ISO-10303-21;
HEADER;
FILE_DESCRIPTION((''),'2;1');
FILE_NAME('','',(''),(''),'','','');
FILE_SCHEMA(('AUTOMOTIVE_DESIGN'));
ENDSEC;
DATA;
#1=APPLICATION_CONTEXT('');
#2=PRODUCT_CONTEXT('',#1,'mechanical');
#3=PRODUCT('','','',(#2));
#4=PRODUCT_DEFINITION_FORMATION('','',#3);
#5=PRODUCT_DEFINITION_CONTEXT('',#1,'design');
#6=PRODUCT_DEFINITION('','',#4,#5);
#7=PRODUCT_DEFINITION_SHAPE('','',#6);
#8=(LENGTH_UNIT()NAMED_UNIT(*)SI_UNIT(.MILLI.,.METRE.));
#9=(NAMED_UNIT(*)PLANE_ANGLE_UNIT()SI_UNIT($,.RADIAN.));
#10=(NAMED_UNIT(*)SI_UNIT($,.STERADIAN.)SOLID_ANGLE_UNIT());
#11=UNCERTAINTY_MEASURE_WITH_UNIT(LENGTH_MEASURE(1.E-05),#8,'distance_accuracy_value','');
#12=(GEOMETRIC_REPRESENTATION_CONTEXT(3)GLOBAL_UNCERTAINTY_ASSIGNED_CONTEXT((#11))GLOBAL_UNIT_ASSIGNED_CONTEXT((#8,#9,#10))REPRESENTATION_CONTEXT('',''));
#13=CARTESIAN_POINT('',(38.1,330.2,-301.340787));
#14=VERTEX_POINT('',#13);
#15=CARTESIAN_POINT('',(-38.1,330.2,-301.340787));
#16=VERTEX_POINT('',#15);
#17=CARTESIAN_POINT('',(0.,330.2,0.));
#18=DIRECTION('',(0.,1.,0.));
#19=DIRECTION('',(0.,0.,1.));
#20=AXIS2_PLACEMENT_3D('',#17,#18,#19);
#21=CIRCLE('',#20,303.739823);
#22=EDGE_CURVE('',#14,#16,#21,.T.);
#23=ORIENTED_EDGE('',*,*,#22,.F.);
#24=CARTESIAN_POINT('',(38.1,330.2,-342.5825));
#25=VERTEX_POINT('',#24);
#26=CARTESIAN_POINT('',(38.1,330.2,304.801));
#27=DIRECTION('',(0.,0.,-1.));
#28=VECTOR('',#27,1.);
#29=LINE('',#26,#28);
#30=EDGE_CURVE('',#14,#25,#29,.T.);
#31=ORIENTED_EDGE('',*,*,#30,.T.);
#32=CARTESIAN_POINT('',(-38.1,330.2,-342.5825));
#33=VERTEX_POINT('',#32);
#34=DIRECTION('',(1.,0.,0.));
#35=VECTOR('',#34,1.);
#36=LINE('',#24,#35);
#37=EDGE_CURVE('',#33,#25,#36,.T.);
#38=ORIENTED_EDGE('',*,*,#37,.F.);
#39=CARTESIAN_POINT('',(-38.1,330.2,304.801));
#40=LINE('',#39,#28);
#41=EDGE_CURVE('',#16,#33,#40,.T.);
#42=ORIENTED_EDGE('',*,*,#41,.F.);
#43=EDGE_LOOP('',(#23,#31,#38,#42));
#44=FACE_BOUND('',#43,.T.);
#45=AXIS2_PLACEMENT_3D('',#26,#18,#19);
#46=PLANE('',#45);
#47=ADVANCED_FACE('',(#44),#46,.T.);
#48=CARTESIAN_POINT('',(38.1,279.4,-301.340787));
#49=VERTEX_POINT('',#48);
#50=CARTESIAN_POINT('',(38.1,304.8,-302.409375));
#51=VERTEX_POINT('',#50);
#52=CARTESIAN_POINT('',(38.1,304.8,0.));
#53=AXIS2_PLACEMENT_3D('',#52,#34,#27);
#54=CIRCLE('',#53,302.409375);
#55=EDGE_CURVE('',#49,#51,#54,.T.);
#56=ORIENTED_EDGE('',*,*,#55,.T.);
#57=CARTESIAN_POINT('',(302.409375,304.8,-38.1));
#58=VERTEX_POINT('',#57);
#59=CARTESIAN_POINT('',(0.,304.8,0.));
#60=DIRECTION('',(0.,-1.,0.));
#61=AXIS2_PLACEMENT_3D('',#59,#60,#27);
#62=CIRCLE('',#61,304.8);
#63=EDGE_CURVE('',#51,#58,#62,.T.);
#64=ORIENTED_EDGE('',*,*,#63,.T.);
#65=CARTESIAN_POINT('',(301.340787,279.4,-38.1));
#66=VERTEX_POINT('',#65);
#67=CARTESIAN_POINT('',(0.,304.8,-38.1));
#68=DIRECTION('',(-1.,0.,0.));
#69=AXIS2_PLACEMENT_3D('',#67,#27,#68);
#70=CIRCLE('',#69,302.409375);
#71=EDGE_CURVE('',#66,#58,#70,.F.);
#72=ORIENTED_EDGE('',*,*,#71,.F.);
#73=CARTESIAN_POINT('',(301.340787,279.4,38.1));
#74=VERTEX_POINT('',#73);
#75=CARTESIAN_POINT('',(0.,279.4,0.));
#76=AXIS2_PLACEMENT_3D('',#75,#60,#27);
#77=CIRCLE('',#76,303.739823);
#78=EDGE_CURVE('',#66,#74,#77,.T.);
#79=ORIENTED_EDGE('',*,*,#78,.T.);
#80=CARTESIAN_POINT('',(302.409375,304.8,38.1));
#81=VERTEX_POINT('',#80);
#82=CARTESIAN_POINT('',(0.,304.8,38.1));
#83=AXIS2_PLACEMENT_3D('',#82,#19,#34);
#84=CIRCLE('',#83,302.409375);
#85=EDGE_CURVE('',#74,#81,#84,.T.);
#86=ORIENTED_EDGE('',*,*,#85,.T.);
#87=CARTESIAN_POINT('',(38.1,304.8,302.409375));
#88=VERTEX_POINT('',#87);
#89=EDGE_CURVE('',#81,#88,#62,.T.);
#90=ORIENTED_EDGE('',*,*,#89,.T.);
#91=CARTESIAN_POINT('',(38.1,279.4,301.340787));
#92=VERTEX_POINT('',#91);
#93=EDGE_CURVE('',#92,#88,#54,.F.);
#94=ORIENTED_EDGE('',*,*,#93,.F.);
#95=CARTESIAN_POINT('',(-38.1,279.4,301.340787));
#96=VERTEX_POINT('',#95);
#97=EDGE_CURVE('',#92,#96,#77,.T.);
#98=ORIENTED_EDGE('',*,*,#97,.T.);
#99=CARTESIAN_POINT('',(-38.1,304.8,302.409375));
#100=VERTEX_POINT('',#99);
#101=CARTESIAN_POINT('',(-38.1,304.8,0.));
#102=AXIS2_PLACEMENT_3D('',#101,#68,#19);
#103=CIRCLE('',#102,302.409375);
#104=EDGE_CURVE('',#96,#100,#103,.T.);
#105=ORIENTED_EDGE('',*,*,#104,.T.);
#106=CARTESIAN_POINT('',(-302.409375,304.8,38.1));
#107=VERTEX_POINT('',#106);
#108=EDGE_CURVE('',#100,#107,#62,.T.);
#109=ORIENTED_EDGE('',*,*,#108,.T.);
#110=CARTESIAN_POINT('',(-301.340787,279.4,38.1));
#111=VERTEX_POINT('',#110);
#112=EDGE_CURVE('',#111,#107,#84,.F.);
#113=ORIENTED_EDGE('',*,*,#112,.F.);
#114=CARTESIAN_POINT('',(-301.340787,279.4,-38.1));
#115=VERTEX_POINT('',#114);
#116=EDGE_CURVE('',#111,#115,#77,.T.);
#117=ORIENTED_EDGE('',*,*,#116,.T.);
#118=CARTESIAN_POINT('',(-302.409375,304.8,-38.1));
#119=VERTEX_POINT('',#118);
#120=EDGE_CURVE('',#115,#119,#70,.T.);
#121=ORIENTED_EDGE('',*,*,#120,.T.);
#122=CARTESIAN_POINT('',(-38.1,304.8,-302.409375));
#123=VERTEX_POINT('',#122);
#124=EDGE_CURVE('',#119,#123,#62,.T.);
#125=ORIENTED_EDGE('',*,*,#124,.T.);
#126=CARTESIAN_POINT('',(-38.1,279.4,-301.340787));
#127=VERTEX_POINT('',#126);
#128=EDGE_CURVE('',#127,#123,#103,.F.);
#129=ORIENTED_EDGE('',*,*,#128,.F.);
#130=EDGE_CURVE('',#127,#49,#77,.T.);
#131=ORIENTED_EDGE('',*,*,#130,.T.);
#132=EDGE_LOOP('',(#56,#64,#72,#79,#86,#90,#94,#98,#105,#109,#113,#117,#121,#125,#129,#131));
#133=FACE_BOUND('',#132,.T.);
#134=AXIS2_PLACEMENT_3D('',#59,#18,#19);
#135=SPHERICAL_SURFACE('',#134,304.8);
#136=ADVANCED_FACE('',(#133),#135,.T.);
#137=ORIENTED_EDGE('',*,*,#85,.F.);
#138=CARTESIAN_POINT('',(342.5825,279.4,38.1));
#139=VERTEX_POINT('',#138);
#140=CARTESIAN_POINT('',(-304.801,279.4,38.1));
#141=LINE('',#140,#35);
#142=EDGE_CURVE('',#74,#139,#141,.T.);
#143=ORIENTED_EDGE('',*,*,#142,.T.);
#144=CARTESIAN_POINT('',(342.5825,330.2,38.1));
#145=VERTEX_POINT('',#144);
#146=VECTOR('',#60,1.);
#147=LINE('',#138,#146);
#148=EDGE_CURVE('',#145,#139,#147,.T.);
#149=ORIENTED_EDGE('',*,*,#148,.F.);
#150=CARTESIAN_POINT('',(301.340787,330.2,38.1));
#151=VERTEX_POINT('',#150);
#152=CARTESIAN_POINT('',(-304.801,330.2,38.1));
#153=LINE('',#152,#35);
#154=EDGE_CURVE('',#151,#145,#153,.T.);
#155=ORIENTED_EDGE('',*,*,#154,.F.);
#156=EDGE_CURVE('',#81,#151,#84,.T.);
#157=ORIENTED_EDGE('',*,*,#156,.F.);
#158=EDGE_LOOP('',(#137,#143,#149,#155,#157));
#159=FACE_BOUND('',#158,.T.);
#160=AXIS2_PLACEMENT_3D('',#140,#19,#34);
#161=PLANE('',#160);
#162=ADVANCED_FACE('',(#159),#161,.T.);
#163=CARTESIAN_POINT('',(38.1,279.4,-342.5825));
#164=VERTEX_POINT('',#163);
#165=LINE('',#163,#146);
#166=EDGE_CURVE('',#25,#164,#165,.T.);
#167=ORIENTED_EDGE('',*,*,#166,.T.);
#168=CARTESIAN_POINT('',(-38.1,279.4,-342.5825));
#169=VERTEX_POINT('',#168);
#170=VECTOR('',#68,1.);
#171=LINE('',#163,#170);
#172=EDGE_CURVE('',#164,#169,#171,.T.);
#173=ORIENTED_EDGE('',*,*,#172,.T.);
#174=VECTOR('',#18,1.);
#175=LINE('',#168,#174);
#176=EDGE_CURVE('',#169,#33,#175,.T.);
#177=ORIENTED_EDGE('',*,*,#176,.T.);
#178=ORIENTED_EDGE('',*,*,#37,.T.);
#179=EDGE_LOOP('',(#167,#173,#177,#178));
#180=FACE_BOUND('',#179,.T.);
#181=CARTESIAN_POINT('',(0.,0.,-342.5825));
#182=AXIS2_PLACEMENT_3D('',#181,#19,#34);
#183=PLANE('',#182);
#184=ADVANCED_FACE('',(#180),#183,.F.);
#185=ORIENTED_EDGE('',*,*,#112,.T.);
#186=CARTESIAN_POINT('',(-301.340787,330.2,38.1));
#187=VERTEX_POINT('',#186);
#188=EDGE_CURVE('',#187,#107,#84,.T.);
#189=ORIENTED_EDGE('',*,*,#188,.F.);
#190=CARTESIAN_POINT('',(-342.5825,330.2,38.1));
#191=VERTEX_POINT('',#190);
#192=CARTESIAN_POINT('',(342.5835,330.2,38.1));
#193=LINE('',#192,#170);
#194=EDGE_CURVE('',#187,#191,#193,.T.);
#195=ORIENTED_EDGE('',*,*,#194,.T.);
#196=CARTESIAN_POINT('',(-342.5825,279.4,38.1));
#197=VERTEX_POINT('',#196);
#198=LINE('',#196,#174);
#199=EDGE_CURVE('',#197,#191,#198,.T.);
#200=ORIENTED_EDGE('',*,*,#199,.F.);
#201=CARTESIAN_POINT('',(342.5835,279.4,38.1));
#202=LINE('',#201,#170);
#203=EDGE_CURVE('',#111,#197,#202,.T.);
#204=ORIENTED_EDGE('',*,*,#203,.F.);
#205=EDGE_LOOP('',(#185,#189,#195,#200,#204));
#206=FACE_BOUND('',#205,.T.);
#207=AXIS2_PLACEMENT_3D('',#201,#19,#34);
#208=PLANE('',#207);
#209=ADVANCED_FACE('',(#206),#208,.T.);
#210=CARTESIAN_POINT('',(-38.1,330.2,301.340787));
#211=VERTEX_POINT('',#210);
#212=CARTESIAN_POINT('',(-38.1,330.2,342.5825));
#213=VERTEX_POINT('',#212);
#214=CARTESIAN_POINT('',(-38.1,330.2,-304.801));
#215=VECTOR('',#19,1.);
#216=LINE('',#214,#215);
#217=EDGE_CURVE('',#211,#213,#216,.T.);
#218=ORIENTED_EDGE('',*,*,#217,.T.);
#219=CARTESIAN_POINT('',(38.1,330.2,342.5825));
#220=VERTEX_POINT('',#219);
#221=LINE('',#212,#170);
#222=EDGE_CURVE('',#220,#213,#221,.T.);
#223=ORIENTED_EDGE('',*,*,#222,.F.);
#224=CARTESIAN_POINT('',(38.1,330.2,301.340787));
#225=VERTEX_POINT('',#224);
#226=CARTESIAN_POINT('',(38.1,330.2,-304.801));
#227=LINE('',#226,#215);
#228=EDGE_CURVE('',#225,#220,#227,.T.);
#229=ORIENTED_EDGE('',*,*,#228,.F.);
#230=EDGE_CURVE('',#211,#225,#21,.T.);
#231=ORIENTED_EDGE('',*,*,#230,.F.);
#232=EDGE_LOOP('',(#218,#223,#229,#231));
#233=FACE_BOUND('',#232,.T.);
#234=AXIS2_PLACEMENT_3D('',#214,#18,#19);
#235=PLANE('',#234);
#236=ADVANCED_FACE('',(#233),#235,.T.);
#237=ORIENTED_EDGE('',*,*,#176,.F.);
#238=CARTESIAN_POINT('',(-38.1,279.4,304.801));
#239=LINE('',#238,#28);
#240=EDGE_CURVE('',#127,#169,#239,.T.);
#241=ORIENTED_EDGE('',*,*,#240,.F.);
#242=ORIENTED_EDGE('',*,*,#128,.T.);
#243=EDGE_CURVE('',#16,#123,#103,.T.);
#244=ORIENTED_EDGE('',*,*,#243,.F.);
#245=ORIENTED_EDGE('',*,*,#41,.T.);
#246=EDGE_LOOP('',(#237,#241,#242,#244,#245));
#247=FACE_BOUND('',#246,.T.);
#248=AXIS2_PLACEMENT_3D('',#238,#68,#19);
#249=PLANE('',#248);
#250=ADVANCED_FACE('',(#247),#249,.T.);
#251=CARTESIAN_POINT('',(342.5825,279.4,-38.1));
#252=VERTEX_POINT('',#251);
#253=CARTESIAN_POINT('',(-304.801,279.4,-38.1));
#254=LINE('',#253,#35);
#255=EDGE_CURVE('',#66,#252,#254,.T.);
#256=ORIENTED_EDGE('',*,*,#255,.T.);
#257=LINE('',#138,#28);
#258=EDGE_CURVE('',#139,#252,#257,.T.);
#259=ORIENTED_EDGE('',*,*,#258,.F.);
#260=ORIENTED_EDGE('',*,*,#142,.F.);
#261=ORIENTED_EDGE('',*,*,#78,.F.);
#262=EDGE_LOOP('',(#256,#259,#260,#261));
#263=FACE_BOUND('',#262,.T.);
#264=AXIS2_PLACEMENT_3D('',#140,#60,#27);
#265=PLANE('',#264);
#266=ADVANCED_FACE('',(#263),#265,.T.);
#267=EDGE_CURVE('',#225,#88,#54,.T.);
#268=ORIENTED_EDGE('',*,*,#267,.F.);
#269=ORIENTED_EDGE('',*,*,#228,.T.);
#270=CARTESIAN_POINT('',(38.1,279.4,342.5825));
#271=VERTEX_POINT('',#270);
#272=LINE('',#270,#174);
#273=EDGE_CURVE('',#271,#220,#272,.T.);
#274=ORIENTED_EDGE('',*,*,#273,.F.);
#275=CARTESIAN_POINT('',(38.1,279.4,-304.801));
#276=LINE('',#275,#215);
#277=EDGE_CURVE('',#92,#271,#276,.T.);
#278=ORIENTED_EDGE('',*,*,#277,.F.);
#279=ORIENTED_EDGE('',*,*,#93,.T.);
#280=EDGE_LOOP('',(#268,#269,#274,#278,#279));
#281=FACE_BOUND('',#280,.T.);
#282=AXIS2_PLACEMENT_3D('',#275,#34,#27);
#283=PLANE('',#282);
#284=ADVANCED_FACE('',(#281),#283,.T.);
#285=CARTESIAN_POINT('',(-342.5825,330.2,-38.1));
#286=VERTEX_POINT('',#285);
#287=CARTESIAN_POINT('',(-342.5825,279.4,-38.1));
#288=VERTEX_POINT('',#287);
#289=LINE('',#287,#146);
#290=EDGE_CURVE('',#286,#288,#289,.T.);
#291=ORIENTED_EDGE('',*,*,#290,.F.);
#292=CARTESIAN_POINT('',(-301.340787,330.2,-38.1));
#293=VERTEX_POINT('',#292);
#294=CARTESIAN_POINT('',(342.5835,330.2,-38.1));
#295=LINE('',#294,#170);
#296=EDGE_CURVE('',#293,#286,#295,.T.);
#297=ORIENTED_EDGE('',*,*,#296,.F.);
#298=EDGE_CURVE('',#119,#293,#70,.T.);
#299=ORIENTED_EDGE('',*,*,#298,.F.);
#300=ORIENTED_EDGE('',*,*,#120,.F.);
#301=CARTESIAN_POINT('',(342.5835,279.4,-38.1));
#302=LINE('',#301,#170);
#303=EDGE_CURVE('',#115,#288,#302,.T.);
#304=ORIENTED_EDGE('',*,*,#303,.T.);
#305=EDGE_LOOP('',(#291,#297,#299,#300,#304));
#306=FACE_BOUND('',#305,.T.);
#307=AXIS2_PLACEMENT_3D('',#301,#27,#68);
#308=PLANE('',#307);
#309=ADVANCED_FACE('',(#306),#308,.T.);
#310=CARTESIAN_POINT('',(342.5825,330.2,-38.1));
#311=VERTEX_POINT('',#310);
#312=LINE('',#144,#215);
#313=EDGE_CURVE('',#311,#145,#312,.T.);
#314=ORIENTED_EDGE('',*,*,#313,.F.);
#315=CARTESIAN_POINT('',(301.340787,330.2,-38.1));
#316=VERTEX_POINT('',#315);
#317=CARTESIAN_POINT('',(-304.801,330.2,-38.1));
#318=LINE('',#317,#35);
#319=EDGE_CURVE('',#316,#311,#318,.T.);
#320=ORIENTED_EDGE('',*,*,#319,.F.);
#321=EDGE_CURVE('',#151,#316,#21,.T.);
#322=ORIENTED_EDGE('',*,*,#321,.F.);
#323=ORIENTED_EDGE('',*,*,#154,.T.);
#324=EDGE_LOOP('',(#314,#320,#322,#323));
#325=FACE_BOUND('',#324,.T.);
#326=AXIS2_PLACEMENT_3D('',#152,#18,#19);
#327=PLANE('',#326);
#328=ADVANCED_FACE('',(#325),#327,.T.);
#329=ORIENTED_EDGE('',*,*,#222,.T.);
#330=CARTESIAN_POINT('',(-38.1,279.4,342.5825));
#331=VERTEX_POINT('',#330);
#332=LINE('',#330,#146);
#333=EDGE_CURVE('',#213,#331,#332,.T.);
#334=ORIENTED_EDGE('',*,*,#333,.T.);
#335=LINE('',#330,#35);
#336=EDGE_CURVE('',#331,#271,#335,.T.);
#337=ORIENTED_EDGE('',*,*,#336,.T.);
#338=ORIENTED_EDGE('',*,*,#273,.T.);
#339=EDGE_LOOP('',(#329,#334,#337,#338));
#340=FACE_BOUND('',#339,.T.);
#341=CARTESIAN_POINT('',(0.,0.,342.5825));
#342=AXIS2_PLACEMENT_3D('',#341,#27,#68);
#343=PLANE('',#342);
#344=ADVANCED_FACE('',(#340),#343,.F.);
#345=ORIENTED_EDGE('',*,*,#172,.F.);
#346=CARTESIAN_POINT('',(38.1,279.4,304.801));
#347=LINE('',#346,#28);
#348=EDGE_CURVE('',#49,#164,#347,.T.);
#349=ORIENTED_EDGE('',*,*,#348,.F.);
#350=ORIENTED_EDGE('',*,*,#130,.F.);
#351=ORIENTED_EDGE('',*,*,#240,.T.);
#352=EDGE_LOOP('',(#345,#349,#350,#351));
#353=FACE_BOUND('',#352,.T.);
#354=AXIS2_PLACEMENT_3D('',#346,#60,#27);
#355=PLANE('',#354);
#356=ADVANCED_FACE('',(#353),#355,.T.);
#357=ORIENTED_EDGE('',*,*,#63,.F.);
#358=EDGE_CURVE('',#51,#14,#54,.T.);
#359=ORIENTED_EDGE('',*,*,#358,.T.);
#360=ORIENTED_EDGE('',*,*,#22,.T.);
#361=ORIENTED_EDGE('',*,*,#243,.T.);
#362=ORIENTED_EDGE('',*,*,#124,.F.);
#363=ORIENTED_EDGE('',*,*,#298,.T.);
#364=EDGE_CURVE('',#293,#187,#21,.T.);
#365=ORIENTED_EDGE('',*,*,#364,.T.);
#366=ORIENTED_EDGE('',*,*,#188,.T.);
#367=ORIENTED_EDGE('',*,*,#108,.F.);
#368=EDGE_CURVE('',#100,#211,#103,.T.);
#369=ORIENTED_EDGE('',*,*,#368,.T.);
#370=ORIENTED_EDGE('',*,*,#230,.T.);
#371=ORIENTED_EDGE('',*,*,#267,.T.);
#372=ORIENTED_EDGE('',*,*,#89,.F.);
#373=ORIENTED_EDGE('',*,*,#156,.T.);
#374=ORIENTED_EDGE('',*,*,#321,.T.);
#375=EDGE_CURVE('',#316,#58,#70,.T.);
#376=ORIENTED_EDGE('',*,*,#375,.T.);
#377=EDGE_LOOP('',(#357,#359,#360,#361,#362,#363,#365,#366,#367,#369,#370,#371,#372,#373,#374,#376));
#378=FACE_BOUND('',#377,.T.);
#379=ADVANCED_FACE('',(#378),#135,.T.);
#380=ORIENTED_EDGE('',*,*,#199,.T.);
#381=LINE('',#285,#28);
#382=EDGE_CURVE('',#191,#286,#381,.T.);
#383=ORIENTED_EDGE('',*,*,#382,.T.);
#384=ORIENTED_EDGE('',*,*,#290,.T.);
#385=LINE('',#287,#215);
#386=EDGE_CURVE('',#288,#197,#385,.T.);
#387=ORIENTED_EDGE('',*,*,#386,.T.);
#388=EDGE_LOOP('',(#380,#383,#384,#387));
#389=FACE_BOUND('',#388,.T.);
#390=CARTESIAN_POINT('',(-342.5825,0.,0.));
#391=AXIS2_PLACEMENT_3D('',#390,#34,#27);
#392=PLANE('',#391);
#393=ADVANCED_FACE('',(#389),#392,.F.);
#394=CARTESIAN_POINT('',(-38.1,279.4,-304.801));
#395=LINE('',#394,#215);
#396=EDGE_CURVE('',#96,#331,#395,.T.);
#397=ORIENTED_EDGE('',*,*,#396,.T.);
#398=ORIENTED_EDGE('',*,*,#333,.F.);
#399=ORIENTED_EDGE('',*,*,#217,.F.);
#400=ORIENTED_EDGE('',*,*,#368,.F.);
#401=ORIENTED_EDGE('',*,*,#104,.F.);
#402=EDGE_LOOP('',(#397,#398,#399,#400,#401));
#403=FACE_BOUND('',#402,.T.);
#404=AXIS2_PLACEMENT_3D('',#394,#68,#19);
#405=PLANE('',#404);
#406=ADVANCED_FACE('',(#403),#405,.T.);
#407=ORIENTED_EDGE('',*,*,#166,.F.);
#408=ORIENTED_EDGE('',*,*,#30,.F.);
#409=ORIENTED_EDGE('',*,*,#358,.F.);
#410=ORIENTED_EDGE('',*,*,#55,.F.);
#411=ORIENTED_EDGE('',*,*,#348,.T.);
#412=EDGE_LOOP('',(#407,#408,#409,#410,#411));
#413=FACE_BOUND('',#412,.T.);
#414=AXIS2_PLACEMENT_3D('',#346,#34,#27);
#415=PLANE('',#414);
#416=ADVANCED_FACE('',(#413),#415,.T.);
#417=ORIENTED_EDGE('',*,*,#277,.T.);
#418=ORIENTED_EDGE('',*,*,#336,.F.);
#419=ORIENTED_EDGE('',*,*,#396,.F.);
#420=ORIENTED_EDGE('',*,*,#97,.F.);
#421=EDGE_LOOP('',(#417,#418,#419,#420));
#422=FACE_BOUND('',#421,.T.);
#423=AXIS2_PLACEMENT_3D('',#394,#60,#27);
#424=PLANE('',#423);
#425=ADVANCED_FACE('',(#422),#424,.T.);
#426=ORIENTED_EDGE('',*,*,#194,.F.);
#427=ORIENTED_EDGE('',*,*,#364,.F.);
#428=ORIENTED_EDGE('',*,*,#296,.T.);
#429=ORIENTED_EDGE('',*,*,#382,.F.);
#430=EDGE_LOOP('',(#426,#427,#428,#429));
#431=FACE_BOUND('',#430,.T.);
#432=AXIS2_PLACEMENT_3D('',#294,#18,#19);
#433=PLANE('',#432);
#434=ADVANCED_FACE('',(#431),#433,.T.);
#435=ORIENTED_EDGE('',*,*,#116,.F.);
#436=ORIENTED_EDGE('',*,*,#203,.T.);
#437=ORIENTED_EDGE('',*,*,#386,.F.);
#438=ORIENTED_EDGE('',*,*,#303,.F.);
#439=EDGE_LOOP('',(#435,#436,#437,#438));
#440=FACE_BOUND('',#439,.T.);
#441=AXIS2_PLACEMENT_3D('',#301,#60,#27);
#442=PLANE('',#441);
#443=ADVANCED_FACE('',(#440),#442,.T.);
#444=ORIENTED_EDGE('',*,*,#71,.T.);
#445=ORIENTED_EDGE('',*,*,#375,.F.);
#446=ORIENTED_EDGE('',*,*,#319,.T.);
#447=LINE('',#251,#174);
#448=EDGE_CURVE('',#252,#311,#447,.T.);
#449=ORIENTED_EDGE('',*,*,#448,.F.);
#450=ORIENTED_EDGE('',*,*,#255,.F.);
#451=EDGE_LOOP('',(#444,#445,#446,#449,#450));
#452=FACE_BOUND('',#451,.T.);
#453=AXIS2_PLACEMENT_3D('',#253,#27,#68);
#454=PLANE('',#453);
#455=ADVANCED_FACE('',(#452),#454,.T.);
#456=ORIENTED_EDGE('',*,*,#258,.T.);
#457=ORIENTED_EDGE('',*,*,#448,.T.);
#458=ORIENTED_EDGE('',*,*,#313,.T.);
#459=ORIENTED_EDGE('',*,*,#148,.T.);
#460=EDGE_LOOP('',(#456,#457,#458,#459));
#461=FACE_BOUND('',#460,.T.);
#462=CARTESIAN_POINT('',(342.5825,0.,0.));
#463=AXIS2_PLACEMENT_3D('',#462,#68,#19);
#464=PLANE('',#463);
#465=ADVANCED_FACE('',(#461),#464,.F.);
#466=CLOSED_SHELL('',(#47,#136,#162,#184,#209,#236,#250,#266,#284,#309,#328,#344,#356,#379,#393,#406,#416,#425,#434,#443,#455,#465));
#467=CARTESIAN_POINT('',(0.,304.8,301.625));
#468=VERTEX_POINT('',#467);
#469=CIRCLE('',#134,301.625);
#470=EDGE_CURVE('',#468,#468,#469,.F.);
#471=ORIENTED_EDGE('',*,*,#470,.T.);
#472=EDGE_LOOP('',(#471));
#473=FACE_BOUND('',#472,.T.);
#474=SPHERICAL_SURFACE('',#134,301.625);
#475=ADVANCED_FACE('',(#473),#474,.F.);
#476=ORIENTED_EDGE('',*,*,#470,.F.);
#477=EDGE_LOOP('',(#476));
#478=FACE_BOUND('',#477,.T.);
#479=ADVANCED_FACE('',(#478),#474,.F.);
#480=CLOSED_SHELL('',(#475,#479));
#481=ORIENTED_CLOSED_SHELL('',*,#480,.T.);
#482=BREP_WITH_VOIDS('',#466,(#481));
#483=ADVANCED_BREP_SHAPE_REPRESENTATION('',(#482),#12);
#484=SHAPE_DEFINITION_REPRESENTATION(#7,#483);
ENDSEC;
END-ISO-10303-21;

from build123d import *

# Parameters (mm, degrees)
SKETCH1_R                = 304.8
BOSS_EXTRUDE1_DEPTH      = 609.6
FILLET1_R                = 304.8
SHELL2_T                 = 3.175
BOSS_EXTRUDE2_REACH      = 942.01
BOSS_EXTRUDE2_END_RADIUS = 304.8
SKETCH3_W                = 76.2
SKETCH3_H                = 50.8
CIRPATTERN1_START        = 279.4
CIRPATTERN1_DEPTH        = 50.8


with BuildPart() as part:
    # Sketch1 → Boss-Extrude1 (new body)
    with BuildSketch(Plane(origin=(0, 0, 0), x_dir=(1, 0, 0), z_dir=(0, 1, 0))):
        with Locations(Location((0, 0, 0), (0, 0, 90))):
            Circle(SKETCH1_R)
    extrude(amount=BOSS_EXTRUDE1_DEPTH)

    # Fillet1
    fillet1_edges = [part.edges().sort_by_distance(p)[0] for p in [
        (0, 0, 304.8),
        (0, 609.6, 304.8),
    ]]
    fillet(fillet1_edges, radius=FILLET1_R - 0.0001)  # a hair under: the kernel refuses the full size

    # Shell2 (no face opened: a closed hollow body)
    add(offset(amount=-SHELL2_T, mode=Mode.PRIVATE), mode=Mode.SUBTRACT)

    # Boss-Extrude2: up to this sphere (the profile starts outside it)
    boss_extrude2_end = Location((0, 304.8, 0)) * Sphere(BOSS_EXTRUDE2_END_RADIUS, mode=Mode.PRIVATE)
    # Sketch3 → Boss-Extrude2 (add, up to the surface)
    with BuildSketch(Plane(origin=(342.5825, 0, 0), x_dir=(0, 0, -1), z_dir=(1, 0, 0)), mode=Mode.PRIVATE) as boss_extrude2_sk1:
        with Locations((0, 304.8)):
            Rectangle(SKETCH3_W, SKETCH3_H)
    boss_extrude2_tool1 = extrude(boss_extrude2_sk1.sketch, amount=-BOSS_EXTRUDE2_REACH, mode=Mode.PRIVATE) - boss_extrude2_end
    add(boss_extrude2_tool1.solids().sort_by_distance((342.5825, 304.8, 0))[0])

    # CirPattern1: read off the stored shape, not the designer's step
    # CirPattern1 outline → CirPattern1 (add)
    with BuildSketch(Plane(origin=(0, 0, 0), x_dir=(1, 0, 0), z_dir=(0, 1, 0)).offset(CIRPATTERN1_START)):
        with BuildLine():
            ThreePointArc((38.1, -301.34078715), (0, -303.739822875), (-38.1, -301.34078715))
            Line((-38.1, -301.34078715), (-38.1, -342.5825))
            Line((-38.1, -342.5825), (38.1, -342.5825))
            Line((38.1, -342.5825), (38.1, -301.34078715))
        make_face()
        with BuildLine():
            ThreePointArc((-301.34078715, -38.1), (-303.739822875, 0), (-301.34078715, 38.1))
            Line((-301.34078715, 38.1), (-342.5825, 38.1))
            Line((-342.5825, 38.1), (-342.5825, -38.1))
            Line((-342.5825, -38.1), (-301.34078715, -38.1))
        make_face()
        with BuildLine():
            ThreePointArc((-38.1, 301.34078715), (0, 303.739822875), (38.1, 301.34078715))
            Line((38.1, 301.34078715), (38.1, 342.5825))
            Line((38.1, 342.5825), (-38.1, 342.5825))
            Line((-38.1, 342.5825), (-38.1, 301.34078715))
        make_face()
    extrude(amount=CIRPATTERN1_DEPTH)


solid = part.part
